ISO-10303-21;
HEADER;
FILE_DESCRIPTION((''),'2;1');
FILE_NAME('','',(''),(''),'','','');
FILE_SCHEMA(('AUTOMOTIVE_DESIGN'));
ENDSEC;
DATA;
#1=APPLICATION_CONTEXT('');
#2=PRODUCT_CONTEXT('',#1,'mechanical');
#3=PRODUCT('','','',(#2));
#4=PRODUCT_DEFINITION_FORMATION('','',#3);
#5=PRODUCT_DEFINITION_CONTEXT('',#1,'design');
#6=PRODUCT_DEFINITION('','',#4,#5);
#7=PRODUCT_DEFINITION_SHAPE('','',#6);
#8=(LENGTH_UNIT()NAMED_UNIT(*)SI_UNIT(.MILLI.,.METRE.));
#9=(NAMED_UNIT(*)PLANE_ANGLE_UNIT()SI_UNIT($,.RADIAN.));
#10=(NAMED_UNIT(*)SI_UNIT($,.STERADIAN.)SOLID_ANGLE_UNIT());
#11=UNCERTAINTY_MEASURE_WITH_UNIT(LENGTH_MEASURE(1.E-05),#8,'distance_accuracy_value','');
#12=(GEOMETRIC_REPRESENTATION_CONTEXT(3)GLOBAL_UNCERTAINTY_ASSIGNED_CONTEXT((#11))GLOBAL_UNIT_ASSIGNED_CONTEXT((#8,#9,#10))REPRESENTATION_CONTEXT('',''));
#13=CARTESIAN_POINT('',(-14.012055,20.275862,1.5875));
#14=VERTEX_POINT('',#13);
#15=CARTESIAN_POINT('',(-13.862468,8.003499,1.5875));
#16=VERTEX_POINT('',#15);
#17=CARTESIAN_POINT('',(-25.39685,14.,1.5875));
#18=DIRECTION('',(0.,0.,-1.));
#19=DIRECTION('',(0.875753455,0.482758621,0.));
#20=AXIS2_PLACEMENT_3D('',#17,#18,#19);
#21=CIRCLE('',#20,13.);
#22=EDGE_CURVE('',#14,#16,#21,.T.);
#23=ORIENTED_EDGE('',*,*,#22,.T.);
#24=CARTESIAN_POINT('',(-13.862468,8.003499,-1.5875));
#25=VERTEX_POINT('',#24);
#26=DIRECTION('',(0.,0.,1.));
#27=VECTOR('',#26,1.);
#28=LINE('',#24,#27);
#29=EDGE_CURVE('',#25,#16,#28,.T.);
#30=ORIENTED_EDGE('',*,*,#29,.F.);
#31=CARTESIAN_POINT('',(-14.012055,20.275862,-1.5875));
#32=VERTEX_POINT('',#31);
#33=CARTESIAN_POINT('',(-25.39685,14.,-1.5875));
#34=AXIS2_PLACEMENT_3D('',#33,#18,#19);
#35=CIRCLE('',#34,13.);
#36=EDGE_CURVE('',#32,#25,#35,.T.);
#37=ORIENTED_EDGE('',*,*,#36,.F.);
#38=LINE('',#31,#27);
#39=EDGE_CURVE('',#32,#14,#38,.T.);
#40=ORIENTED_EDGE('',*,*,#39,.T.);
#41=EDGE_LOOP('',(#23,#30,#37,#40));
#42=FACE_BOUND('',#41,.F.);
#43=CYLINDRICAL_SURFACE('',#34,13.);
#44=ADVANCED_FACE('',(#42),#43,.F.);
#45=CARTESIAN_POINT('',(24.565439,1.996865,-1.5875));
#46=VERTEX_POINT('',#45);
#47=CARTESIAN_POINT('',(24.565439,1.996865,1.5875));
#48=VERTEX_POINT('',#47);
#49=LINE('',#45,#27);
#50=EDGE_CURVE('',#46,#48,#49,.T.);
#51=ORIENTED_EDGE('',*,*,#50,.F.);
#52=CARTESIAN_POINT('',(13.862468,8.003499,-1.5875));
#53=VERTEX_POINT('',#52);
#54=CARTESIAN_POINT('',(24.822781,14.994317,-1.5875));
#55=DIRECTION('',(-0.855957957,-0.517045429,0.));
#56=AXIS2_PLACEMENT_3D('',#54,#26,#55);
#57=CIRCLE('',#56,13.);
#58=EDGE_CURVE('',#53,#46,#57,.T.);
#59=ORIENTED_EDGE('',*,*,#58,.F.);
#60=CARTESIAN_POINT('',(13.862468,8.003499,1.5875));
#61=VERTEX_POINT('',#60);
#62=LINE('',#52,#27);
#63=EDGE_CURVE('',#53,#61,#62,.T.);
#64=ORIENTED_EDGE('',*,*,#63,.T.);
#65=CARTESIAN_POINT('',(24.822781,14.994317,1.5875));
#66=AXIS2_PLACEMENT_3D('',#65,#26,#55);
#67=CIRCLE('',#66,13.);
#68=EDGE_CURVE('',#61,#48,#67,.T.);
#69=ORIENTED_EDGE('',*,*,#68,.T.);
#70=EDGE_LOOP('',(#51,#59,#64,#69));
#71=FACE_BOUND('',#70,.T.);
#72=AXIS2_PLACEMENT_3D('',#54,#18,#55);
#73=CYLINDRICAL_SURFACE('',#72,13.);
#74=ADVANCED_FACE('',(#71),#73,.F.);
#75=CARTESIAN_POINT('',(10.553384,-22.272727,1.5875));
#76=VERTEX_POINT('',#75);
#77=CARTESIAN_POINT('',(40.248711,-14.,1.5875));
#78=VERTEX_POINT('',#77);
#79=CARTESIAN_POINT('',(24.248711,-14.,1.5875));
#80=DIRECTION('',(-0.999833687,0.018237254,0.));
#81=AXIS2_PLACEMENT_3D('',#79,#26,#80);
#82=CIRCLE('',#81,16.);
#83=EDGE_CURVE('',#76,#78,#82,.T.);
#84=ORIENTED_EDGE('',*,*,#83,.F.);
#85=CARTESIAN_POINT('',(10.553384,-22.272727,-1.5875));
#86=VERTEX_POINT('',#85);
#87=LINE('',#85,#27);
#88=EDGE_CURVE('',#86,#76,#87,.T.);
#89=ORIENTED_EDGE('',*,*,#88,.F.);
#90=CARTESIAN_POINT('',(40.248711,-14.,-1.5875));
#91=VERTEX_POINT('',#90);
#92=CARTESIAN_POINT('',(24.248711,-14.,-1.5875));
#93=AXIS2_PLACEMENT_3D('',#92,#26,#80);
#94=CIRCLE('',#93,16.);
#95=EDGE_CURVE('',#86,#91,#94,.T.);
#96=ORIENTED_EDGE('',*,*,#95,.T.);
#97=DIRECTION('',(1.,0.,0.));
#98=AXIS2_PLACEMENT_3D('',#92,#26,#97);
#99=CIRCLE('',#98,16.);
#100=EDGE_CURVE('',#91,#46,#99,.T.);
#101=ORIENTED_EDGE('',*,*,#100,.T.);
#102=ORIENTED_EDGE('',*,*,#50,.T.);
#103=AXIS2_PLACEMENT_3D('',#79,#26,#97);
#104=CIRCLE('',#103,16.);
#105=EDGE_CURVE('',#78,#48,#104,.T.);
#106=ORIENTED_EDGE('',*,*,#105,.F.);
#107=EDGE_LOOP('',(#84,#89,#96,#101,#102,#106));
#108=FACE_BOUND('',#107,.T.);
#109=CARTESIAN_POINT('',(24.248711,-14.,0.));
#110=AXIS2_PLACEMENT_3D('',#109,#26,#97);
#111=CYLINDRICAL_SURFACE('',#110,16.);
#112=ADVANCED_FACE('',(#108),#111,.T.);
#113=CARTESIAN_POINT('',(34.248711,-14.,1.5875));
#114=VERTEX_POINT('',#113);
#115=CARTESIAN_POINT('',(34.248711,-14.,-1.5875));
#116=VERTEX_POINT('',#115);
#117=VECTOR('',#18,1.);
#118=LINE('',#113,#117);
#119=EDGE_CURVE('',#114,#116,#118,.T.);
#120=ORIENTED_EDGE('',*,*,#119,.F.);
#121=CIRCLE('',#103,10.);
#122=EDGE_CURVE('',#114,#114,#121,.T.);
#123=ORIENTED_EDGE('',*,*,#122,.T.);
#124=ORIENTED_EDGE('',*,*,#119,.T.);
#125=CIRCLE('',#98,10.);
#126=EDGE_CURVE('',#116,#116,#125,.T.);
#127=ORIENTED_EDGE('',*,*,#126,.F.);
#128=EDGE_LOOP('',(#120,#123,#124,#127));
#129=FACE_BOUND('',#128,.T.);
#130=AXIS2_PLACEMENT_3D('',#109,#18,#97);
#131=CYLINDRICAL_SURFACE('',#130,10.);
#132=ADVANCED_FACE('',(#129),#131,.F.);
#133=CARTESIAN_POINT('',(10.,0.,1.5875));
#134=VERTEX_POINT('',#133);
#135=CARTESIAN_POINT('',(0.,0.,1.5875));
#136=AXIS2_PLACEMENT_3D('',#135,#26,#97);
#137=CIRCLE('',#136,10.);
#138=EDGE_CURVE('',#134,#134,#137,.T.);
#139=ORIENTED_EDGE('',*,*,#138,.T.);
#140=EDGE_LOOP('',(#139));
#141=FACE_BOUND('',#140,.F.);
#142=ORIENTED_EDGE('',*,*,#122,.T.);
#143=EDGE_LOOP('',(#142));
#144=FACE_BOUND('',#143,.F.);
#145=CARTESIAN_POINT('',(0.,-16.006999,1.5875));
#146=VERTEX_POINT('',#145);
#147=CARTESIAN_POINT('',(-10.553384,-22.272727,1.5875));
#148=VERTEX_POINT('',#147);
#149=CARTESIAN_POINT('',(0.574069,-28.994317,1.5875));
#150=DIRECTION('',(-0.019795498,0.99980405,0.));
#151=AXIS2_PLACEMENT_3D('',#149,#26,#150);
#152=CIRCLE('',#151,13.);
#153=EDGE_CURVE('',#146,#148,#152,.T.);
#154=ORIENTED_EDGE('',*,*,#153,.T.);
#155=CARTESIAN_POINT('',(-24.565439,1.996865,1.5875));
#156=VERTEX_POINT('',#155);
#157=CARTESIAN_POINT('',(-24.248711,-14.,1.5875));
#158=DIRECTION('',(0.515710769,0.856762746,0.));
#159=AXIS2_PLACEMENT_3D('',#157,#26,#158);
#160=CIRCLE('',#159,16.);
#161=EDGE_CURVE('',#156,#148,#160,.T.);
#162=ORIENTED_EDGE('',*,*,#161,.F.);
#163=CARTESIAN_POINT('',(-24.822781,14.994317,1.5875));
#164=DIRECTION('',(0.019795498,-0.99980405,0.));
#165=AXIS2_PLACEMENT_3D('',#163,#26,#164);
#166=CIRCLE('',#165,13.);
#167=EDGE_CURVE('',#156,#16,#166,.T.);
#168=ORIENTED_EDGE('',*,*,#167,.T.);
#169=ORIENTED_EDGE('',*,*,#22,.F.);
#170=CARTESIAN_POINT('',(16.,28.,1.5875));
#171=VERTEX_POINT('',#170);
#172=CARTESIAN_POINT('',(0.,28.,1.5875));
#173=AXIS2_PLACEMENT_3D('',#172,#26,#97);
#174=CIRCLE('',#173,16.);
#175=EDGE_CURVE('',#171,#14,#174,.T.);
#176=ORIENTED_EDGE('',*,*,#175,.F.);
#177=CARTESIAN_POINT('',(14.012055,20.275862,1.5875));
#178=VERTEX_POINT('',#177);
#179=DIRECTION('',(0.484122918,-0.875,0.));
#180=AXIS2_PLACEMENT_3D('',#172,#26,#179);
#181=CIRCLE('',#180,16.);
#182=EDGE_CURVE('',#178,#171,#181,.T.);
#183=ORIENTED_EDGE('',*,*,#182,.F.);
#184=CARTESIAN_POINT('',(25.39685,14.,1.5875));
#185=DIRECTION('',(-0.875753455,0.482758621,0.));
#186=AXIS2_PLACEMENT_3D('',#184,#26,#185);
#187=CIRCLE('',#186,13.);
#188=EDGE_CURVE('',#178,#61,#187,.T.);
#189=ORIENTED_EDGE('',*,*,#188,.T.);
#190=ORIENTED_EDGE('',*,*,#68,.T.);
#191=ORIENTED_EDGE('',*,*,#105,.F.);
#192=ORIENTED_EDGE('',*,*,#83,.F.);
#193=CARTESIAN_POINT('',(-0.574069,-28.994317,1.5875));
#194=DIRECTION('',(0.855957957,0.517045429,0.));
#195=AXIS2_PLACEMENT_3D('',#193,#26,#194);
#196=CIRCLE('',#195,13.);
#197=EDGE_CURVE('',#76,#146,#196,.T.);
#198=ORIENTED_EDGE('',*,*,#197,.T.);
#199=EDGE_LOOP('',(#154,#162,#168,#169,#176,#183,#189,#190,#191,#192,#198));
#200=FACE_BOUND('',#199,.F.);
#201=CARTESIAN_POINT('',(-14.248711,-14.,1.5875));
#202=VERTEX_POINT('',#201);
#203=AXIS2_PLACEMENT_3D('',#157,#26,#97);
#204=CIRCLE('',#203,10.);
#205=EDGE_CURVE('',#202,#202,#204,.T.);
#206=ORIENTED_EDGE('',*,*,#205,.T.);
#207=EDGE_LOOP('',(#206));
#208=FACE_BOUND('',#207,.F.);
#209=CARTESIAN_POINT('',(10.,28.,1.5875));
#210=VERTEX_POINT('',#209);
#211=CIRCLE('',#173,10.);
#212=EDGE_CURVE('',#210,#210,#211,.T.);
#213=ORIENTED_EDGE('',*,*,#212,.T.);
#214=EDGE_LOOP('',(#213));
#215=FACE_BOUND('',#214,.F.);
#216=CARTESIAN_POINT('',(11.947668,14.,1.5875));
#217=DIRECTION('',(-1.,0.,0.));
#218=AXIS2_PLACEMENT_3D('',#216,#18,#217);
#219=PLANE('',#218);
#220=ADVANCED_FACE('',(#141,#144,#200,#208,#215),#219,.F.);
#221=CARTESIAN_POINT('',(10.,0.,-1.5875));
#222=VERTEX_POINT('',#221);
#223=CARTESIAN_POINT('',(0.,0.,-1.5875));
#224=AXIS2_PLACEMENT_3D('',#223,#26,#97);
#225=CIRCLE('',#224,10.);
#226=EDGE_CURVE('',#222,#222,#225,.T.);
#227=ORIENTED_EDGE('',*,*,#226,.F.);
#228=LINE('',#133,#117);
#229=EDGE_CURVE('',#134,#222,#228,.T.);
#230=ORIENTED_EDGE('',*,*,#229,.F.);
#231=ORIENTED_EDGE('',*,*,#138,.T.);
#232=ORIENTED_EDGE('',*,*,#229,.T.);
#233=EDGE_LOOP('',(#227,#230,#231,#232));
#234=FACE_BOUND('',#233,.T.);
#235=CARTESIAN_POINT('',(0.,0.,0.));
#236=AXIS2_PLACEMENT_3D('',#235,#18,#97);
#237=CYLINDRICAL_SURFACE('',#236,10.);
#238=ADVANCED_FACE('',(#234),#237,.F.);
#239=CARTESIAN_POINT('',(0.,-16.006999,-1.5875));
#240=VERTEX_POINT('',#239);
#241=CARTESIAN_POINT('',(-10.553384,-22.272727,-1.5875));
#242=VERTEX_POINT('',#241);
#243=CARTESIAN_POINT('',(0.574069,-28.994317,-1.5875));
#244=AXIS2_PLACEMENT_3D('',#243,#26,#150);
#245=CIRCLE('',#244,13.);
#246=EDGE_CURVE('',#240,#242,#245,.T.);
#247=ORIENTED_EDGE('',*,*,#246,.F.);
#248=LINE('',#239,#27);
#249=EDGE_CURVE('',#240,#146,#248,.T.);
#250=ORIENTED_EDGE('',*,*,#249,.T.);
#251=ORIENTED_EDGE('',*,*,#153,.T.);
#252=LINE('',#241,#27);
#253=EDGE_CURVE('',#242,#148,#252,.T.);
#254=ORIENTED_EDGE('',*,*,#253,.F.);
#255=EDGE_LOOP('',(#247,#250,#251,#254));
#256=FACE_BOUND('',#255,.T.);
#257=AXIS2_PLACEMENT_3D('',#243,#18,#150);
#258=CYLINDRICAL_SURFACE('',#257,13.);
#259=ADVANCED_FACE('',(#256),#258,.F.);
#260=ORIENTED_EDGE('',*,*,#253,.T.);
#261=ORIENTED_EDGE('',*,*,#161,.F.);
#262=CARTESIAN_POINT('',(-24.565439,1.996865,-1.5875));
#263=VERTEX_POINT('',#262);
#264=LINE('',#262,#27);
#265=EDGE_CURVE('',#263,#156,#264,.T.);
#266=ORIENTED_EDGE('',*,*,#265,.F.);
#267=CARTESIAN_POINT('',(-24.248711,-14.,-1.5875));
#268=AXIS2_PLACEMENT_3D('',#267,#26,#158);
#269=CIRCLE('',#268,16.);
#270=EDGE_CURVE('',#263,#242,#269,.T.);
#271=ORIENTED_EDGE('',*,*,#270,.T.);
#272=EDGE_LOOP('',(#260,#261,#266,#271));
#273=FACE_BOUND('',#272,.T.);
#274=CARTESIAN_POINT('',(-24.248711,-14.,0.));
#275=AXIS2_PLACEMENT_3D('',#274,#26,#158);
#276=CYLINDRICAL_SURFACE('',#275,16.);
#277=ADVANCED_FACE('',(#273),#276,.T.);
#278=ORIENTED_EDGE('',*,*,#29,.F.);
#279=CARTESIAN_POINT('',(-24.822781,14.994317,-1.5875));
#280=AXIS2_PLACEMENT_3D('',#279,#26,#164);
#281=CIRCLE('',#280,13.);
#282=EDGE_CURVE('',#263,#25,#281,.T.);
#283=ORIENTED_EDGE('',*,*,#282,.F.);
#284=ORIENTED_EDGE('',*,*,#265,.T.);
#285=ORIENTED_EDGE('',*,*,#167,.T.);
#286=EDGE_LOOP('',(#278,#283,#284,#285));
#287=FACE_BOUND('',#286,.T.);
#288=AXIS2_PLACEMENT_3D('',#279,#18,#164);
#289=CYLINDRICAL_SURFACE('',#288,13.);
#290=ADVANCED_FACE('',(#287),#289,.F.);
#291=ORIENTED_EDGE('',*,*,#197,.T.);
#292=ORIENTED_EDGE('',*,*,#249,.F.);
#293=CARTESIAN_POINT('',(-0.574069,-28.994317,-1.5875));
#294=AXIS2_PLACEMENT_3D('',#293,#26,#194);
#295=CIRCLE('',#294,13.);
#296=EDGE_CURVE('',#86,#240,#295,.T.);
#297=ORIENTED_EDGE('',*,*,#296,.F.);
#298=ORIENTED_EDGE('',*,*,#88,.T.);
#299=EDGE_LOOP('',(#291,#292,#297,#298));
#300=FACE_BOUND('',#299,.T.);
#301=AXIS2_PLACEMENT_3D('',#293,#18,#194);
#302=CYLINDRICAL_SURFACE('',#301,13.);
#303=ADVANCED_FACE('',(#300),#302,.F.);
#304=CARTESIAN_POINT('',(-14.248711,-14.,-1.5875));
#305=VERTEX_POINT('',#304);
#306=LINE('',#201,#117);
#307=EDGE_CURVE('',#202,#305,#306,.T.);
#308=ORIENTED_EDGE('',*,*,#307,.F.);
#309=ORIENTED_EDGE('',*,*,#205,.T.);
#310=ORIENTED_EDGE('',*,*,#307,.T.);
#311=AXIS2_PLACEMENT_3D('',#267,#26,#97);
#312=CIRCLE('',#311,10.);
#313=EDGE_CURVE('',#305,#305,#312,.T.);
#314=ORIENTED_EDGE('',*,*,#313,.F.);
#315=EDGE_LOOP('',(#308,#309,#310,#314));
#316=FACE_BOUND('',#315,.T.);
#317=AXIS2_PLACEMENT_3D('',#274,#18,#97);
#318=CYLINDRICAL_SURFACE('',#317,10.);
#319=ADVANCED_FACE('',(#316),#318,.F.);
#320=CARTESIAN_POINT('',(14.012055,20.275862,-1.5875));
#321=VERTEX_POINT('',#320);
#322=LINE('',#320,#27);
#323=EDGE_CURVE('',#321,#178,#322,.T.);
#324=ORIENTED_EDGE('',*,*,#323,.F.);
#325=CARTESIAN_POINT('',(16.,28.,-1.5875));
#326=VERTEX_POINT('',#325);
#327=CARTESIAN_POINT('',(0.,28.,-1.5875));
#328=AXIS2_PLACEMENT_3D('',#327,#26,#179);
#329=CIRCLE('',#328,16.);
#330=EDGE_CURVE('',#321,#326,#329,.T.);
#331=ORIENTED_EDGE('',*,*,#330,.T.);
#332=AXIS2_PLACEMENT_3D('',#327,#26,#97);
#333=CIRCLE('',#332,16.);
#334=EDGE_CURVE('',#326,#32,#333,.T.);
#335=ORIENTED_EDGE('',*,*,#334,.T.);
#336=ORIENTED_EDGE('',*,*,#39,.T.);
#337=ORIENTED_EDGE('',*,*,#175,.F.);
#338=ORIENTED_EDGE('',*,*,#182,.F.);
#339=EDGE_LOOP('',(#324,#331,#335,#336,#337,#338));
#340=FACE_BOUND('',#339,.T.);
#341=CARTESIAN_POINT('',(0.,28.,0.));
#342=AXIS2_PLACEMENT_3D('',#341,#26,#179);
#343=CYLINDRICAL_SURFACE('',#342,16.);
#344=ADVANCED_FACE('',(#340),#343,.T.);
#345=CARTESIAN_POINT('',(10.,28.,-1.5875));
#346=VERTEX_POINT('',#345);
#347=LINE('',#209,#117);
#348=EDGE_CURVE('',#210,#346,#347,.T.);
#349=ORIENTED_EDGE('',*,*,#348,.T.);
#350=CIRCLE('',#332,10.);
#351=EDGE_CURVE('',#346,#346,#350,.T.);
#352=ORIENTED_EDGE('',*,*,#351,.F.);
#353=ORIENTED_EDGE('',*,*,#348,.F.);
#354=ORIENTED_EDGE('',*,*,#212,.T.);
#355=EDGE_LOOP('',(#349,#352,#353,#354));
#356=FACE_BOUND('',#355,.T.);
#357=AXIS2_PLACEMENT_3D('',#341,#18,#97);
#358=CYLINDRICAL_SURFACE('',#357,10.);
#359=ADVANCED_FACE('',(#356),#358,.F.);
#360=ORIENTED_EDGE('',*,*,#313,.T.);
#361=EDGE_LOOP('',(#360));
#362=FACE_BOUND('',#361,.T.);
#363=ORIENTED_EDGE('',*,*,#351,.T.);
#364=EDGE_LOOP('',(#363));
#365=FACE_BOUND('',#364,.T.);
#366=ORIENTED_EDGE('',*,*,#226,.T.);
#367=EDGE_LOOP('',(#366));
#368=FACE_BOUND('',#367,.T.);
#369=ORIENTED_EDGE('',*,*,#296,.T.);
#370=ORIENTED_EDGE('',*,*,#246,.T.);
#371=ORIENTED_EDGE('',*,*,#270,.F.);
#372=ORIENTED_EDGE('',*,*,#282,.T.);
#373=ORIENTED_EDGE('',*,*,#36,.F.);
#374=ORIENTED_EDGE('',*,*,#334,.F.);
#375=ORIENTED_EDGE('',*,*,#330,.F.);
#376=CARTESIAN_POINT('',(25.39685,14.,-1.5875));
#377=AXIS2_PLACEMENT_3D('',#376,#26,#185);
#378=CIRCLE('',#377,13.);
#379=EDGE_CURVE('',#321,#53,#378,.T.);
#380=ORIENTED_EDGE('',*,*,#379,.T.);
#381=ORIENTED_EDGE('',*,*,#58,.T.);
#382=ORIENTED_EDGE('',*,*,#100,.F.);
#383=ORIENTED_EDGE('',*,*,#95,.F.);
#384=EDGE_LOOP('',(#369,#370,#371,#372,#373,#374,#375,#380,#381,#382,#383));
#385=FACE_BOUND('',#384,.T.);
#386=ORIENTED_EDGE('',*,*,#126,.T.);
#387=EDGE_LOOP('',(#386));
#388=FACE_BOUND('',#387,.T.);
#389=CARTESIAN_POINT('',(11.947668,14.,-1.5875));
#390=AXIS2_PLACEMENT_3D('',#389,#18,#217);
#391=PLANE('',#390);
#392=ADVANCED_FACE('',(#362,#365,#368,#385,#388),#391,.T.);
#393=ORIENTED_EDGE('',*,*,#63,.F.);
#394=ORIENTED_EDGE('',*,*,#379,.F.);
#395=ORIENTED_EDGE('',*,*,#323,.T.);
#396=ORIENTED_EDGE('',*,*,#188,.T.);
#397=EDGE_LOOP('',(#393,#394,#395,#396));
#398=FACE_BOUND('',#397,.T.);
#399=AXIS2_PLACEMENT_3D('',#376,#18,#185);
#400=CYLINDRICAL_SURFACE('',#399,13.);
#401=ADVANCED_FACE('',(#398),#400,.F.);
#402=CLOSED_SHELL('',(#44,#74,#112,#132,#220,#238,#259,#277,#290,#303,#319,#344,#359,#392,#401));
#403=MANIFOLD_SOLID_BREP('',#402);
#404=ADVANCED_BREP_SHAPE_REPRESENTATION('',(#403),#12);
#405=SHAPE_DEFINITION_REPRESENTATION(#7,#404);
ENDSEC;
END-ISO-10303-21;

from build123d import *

# Parameters (mm, degrees)
F2_R        = 10
F3_DEPTH    = 1.5875
F4_T1_DEPTH = 3.175


# Not quite as in the source:
# - a fillet or chamfer that OpenCascade refuses, or shapes differently, is made with other operations: its cross-section is extruded or revolved along the edge and cut away or added


with BuildPart() as f3:
    # F2 (on Top) → F3 (new body, symmetric)
    with BuildSketch(Plane.XY):
        with BuildLine():
            ThreePointArc((7.7459666924, 14), (13.7828782748, 19.8739759746), (16, 28))
            ThreePointArc((16, 28), (-8.1260240254, 41.7828782748), (-7.7459666924, 14))
            ThreePointArc((-7.7459666924, 14), (0, 16), (7.7459666924, 14))
        make_face()
        with Locations((0, 28)):
            Circle(F2_R, mode=Mode.SUBTRACT)
        with BuildLine():
            ThreePointArc((7.7459666924, 14), (0, 12), (-7.7459666924, 14))
            ThreePointArc((-7.7459666924, 14), (-13.8564064606, 8), (-15.9973389992, -0.2917960675))
            ThreePointArc((-15.9973389992, -0.2917960675), (-10.3923048454, -6), (-8.2513723068, -13.7082039325))
            ThreePointArc((-8.2513723068, -13.7082039325), (0, -16), (8.2513723068, -13.7082039325))
            ThreePointArc((8.2513723068, -13.7082039325), (10.3923048454, -6), (15.9973389992, -0.2917960675))
            ThreePointArc((15.9973389992, -0.2917960675), (15.999334736, -0.1459041003), (16, 0))
            ThreePointArc((16, 0), (13.7828782748, 8.1260240254), (7.7459666924, 14))
        make_face()
        Circle(F2_R, mode=Mode.SUBTRACT)
        with BuildLine():
            ThreePointArc((-8.2513723068, -13.7082039325), (-13.8564064606, -8), (-15.9973389992, -0.2917960675))
            ThreePointArc((-15.9973389992, -0.2917960675), (-38.1774936811, -21.8733107106), (-8.248711306, -14))
            ThreePointArc((-8.248711306, -14), (-8.24937657, -13.8540958997), (-8.2513723068, -13.7082039325))
        make_face()
        with Locations((-24.248711306, -14)):
            Circle(F2_R, mode=Mode.SUBTRACT)
        with BuildLine():
            ThreePointArc((-8.2513723068, -13.7082039325), (-10.3923048454, -6), (-15.9973389992, -0.2917960675))
            ThreePointArc((-15.9973389992, -0.2917960675), (-13.8564064606, -8), (-8.2513723068, -13.7082039325))
        make_face()
        with BuildLine():
            ThreePointArc((7.7459666924, 14), (0, 16), (-7.7459666924, 14))
            ThreePointArc((-7.7459666924, 14), (0, 12), (7.7459666924, 14))
        make_face()
        with BuildLine():
            ThreePointArc((8.2513723068, -13.7082039325), (13.8564064606, -8), (15.9973389992, -0.2917960675))
            ThreePointArc((15.9973389992, -0.2917960675), (10.3923048454, -6), (8.2513723068, -13.7082039325))
        make_face()
        with BuildLine():
            ThreePointArc((40.248711306, -14), (32.1220220166, -0.0712176249), (15.9973389992, -0.2917960675))
            ThreePointArc((15.9973389992, -0.2917960675), (13.8564064606, -8), (8.2513723068, -13.7082039325))
            ThreePointArc((8.2513723068, -13.7082039325), (24.1028072057, -29.999334736), (40.248711306, -14))
        make_face()
        with Locations((24.248711306, -14)):
            Circle(F2_R, mode=Mode.SUBTRACT)
    extrude(amount=F3_DEPTH, both=True)

    # F4: fillet of radius 13 on 6 edges, made by hand

    # F4_s2 → F4_t1 (join)
    with BuildSketch(Plane.XY.offset(-1.5875)):
        with BuildLine():
            ThreePointArc((14.0120552819, 20.275862069), (12.3968501984, 14), (14.0120552819, 7.724137931))
            ThreePointArc((14.0120552819, 7.724137931), (11.3225214169, 11.3048887108), (7.7459666924, 14))
            ThreePointArc((7.7459666924, 14), (11.3225214169, 16.6951112892), (14.0120552819, 20.275862069))
        make_face()
        with BuildLine():
            ThreePointArc((13.6953273115, 8.2727268678), (18.3227807522, 3.7359871987), (24.5654392763, 1.9968647989))
            ThreePointArc((24.5654392763, 1.9968647989), (20.1196512039, 1.4580355373), (15.9973389992, -0.2917960675))
            ThreePointArc((15.9973389992, -0.2917960675), (15.451581519, 4.1531468265), (13.6953273115, 8.2727268678))
        make_face()
        with BuildLine():
            ThreePointArc((10.5533839944, -22.2727268678), (5.9259305538, -17.7359871987), (-0.3167279703, -15.9968647989))
            ThreePointArc((-0.3167279703, -15.9968647989), (4.1290601021, -15.4580355373), (8.2513723068, -13.7082039325))
            ThreePointArc((8.2513723068, -13.7082039325), (8.797129787, -18.1531468265), (10.5533839944, -22.2727268678))
        make_face()
        with BuildLine():
            ThreePointArc((0.3167279703, -15.9968647989), (-5.9259305538, -17.7359871987), (-10.5533839944, -22.2727268678))
            ThreePointArc((-10.5533839944, -22.2727268678), (-8.797129787, -18.1531468265), (-8.2513723068, -13.7082039325))
            ThreePointArc((-8.2513723068, -13.7082039325), (-4.1290601021, -15.4580355373), (0.3167279703, -15.9968647989))
        make_face()
        with BuildLine():
            ThreePointArc((-24.5654392763, 1.9968647989), (-18.3227807522, 3.7359871987), (-13.6953273115, 8.2727268678))
            ThreePointArc((-13.6953273115, 8.2727268678), (-15.451581519, 4.1531468265), (-15.9973389992, -0.2917960675))
            ThreePointArc((-15.9973389992, -0.2917960675), (-20.1196512039, 1.4580355373), (-24.5654392763, 1.9968647989))
        make_face()
        with BuildLine():
            ThreePointArc((-14.0120552819, 20.275862069), (-12.3968501984, 14), (-14.0120552819, 7.724137931))
            ThreePointArc((-14.0120552819, 7.724137931), (-11.3225214169, 11.3048887108), (-7.7459666924, 14))
            ThreePointArc((-7.7459666924, 14), (-11.3225214169, 16.6951112892), (-14.0120552819, 20.275862069))
        make_face()
    extrude(amount=F4_T1_DEPTH)


solid = f3.part
